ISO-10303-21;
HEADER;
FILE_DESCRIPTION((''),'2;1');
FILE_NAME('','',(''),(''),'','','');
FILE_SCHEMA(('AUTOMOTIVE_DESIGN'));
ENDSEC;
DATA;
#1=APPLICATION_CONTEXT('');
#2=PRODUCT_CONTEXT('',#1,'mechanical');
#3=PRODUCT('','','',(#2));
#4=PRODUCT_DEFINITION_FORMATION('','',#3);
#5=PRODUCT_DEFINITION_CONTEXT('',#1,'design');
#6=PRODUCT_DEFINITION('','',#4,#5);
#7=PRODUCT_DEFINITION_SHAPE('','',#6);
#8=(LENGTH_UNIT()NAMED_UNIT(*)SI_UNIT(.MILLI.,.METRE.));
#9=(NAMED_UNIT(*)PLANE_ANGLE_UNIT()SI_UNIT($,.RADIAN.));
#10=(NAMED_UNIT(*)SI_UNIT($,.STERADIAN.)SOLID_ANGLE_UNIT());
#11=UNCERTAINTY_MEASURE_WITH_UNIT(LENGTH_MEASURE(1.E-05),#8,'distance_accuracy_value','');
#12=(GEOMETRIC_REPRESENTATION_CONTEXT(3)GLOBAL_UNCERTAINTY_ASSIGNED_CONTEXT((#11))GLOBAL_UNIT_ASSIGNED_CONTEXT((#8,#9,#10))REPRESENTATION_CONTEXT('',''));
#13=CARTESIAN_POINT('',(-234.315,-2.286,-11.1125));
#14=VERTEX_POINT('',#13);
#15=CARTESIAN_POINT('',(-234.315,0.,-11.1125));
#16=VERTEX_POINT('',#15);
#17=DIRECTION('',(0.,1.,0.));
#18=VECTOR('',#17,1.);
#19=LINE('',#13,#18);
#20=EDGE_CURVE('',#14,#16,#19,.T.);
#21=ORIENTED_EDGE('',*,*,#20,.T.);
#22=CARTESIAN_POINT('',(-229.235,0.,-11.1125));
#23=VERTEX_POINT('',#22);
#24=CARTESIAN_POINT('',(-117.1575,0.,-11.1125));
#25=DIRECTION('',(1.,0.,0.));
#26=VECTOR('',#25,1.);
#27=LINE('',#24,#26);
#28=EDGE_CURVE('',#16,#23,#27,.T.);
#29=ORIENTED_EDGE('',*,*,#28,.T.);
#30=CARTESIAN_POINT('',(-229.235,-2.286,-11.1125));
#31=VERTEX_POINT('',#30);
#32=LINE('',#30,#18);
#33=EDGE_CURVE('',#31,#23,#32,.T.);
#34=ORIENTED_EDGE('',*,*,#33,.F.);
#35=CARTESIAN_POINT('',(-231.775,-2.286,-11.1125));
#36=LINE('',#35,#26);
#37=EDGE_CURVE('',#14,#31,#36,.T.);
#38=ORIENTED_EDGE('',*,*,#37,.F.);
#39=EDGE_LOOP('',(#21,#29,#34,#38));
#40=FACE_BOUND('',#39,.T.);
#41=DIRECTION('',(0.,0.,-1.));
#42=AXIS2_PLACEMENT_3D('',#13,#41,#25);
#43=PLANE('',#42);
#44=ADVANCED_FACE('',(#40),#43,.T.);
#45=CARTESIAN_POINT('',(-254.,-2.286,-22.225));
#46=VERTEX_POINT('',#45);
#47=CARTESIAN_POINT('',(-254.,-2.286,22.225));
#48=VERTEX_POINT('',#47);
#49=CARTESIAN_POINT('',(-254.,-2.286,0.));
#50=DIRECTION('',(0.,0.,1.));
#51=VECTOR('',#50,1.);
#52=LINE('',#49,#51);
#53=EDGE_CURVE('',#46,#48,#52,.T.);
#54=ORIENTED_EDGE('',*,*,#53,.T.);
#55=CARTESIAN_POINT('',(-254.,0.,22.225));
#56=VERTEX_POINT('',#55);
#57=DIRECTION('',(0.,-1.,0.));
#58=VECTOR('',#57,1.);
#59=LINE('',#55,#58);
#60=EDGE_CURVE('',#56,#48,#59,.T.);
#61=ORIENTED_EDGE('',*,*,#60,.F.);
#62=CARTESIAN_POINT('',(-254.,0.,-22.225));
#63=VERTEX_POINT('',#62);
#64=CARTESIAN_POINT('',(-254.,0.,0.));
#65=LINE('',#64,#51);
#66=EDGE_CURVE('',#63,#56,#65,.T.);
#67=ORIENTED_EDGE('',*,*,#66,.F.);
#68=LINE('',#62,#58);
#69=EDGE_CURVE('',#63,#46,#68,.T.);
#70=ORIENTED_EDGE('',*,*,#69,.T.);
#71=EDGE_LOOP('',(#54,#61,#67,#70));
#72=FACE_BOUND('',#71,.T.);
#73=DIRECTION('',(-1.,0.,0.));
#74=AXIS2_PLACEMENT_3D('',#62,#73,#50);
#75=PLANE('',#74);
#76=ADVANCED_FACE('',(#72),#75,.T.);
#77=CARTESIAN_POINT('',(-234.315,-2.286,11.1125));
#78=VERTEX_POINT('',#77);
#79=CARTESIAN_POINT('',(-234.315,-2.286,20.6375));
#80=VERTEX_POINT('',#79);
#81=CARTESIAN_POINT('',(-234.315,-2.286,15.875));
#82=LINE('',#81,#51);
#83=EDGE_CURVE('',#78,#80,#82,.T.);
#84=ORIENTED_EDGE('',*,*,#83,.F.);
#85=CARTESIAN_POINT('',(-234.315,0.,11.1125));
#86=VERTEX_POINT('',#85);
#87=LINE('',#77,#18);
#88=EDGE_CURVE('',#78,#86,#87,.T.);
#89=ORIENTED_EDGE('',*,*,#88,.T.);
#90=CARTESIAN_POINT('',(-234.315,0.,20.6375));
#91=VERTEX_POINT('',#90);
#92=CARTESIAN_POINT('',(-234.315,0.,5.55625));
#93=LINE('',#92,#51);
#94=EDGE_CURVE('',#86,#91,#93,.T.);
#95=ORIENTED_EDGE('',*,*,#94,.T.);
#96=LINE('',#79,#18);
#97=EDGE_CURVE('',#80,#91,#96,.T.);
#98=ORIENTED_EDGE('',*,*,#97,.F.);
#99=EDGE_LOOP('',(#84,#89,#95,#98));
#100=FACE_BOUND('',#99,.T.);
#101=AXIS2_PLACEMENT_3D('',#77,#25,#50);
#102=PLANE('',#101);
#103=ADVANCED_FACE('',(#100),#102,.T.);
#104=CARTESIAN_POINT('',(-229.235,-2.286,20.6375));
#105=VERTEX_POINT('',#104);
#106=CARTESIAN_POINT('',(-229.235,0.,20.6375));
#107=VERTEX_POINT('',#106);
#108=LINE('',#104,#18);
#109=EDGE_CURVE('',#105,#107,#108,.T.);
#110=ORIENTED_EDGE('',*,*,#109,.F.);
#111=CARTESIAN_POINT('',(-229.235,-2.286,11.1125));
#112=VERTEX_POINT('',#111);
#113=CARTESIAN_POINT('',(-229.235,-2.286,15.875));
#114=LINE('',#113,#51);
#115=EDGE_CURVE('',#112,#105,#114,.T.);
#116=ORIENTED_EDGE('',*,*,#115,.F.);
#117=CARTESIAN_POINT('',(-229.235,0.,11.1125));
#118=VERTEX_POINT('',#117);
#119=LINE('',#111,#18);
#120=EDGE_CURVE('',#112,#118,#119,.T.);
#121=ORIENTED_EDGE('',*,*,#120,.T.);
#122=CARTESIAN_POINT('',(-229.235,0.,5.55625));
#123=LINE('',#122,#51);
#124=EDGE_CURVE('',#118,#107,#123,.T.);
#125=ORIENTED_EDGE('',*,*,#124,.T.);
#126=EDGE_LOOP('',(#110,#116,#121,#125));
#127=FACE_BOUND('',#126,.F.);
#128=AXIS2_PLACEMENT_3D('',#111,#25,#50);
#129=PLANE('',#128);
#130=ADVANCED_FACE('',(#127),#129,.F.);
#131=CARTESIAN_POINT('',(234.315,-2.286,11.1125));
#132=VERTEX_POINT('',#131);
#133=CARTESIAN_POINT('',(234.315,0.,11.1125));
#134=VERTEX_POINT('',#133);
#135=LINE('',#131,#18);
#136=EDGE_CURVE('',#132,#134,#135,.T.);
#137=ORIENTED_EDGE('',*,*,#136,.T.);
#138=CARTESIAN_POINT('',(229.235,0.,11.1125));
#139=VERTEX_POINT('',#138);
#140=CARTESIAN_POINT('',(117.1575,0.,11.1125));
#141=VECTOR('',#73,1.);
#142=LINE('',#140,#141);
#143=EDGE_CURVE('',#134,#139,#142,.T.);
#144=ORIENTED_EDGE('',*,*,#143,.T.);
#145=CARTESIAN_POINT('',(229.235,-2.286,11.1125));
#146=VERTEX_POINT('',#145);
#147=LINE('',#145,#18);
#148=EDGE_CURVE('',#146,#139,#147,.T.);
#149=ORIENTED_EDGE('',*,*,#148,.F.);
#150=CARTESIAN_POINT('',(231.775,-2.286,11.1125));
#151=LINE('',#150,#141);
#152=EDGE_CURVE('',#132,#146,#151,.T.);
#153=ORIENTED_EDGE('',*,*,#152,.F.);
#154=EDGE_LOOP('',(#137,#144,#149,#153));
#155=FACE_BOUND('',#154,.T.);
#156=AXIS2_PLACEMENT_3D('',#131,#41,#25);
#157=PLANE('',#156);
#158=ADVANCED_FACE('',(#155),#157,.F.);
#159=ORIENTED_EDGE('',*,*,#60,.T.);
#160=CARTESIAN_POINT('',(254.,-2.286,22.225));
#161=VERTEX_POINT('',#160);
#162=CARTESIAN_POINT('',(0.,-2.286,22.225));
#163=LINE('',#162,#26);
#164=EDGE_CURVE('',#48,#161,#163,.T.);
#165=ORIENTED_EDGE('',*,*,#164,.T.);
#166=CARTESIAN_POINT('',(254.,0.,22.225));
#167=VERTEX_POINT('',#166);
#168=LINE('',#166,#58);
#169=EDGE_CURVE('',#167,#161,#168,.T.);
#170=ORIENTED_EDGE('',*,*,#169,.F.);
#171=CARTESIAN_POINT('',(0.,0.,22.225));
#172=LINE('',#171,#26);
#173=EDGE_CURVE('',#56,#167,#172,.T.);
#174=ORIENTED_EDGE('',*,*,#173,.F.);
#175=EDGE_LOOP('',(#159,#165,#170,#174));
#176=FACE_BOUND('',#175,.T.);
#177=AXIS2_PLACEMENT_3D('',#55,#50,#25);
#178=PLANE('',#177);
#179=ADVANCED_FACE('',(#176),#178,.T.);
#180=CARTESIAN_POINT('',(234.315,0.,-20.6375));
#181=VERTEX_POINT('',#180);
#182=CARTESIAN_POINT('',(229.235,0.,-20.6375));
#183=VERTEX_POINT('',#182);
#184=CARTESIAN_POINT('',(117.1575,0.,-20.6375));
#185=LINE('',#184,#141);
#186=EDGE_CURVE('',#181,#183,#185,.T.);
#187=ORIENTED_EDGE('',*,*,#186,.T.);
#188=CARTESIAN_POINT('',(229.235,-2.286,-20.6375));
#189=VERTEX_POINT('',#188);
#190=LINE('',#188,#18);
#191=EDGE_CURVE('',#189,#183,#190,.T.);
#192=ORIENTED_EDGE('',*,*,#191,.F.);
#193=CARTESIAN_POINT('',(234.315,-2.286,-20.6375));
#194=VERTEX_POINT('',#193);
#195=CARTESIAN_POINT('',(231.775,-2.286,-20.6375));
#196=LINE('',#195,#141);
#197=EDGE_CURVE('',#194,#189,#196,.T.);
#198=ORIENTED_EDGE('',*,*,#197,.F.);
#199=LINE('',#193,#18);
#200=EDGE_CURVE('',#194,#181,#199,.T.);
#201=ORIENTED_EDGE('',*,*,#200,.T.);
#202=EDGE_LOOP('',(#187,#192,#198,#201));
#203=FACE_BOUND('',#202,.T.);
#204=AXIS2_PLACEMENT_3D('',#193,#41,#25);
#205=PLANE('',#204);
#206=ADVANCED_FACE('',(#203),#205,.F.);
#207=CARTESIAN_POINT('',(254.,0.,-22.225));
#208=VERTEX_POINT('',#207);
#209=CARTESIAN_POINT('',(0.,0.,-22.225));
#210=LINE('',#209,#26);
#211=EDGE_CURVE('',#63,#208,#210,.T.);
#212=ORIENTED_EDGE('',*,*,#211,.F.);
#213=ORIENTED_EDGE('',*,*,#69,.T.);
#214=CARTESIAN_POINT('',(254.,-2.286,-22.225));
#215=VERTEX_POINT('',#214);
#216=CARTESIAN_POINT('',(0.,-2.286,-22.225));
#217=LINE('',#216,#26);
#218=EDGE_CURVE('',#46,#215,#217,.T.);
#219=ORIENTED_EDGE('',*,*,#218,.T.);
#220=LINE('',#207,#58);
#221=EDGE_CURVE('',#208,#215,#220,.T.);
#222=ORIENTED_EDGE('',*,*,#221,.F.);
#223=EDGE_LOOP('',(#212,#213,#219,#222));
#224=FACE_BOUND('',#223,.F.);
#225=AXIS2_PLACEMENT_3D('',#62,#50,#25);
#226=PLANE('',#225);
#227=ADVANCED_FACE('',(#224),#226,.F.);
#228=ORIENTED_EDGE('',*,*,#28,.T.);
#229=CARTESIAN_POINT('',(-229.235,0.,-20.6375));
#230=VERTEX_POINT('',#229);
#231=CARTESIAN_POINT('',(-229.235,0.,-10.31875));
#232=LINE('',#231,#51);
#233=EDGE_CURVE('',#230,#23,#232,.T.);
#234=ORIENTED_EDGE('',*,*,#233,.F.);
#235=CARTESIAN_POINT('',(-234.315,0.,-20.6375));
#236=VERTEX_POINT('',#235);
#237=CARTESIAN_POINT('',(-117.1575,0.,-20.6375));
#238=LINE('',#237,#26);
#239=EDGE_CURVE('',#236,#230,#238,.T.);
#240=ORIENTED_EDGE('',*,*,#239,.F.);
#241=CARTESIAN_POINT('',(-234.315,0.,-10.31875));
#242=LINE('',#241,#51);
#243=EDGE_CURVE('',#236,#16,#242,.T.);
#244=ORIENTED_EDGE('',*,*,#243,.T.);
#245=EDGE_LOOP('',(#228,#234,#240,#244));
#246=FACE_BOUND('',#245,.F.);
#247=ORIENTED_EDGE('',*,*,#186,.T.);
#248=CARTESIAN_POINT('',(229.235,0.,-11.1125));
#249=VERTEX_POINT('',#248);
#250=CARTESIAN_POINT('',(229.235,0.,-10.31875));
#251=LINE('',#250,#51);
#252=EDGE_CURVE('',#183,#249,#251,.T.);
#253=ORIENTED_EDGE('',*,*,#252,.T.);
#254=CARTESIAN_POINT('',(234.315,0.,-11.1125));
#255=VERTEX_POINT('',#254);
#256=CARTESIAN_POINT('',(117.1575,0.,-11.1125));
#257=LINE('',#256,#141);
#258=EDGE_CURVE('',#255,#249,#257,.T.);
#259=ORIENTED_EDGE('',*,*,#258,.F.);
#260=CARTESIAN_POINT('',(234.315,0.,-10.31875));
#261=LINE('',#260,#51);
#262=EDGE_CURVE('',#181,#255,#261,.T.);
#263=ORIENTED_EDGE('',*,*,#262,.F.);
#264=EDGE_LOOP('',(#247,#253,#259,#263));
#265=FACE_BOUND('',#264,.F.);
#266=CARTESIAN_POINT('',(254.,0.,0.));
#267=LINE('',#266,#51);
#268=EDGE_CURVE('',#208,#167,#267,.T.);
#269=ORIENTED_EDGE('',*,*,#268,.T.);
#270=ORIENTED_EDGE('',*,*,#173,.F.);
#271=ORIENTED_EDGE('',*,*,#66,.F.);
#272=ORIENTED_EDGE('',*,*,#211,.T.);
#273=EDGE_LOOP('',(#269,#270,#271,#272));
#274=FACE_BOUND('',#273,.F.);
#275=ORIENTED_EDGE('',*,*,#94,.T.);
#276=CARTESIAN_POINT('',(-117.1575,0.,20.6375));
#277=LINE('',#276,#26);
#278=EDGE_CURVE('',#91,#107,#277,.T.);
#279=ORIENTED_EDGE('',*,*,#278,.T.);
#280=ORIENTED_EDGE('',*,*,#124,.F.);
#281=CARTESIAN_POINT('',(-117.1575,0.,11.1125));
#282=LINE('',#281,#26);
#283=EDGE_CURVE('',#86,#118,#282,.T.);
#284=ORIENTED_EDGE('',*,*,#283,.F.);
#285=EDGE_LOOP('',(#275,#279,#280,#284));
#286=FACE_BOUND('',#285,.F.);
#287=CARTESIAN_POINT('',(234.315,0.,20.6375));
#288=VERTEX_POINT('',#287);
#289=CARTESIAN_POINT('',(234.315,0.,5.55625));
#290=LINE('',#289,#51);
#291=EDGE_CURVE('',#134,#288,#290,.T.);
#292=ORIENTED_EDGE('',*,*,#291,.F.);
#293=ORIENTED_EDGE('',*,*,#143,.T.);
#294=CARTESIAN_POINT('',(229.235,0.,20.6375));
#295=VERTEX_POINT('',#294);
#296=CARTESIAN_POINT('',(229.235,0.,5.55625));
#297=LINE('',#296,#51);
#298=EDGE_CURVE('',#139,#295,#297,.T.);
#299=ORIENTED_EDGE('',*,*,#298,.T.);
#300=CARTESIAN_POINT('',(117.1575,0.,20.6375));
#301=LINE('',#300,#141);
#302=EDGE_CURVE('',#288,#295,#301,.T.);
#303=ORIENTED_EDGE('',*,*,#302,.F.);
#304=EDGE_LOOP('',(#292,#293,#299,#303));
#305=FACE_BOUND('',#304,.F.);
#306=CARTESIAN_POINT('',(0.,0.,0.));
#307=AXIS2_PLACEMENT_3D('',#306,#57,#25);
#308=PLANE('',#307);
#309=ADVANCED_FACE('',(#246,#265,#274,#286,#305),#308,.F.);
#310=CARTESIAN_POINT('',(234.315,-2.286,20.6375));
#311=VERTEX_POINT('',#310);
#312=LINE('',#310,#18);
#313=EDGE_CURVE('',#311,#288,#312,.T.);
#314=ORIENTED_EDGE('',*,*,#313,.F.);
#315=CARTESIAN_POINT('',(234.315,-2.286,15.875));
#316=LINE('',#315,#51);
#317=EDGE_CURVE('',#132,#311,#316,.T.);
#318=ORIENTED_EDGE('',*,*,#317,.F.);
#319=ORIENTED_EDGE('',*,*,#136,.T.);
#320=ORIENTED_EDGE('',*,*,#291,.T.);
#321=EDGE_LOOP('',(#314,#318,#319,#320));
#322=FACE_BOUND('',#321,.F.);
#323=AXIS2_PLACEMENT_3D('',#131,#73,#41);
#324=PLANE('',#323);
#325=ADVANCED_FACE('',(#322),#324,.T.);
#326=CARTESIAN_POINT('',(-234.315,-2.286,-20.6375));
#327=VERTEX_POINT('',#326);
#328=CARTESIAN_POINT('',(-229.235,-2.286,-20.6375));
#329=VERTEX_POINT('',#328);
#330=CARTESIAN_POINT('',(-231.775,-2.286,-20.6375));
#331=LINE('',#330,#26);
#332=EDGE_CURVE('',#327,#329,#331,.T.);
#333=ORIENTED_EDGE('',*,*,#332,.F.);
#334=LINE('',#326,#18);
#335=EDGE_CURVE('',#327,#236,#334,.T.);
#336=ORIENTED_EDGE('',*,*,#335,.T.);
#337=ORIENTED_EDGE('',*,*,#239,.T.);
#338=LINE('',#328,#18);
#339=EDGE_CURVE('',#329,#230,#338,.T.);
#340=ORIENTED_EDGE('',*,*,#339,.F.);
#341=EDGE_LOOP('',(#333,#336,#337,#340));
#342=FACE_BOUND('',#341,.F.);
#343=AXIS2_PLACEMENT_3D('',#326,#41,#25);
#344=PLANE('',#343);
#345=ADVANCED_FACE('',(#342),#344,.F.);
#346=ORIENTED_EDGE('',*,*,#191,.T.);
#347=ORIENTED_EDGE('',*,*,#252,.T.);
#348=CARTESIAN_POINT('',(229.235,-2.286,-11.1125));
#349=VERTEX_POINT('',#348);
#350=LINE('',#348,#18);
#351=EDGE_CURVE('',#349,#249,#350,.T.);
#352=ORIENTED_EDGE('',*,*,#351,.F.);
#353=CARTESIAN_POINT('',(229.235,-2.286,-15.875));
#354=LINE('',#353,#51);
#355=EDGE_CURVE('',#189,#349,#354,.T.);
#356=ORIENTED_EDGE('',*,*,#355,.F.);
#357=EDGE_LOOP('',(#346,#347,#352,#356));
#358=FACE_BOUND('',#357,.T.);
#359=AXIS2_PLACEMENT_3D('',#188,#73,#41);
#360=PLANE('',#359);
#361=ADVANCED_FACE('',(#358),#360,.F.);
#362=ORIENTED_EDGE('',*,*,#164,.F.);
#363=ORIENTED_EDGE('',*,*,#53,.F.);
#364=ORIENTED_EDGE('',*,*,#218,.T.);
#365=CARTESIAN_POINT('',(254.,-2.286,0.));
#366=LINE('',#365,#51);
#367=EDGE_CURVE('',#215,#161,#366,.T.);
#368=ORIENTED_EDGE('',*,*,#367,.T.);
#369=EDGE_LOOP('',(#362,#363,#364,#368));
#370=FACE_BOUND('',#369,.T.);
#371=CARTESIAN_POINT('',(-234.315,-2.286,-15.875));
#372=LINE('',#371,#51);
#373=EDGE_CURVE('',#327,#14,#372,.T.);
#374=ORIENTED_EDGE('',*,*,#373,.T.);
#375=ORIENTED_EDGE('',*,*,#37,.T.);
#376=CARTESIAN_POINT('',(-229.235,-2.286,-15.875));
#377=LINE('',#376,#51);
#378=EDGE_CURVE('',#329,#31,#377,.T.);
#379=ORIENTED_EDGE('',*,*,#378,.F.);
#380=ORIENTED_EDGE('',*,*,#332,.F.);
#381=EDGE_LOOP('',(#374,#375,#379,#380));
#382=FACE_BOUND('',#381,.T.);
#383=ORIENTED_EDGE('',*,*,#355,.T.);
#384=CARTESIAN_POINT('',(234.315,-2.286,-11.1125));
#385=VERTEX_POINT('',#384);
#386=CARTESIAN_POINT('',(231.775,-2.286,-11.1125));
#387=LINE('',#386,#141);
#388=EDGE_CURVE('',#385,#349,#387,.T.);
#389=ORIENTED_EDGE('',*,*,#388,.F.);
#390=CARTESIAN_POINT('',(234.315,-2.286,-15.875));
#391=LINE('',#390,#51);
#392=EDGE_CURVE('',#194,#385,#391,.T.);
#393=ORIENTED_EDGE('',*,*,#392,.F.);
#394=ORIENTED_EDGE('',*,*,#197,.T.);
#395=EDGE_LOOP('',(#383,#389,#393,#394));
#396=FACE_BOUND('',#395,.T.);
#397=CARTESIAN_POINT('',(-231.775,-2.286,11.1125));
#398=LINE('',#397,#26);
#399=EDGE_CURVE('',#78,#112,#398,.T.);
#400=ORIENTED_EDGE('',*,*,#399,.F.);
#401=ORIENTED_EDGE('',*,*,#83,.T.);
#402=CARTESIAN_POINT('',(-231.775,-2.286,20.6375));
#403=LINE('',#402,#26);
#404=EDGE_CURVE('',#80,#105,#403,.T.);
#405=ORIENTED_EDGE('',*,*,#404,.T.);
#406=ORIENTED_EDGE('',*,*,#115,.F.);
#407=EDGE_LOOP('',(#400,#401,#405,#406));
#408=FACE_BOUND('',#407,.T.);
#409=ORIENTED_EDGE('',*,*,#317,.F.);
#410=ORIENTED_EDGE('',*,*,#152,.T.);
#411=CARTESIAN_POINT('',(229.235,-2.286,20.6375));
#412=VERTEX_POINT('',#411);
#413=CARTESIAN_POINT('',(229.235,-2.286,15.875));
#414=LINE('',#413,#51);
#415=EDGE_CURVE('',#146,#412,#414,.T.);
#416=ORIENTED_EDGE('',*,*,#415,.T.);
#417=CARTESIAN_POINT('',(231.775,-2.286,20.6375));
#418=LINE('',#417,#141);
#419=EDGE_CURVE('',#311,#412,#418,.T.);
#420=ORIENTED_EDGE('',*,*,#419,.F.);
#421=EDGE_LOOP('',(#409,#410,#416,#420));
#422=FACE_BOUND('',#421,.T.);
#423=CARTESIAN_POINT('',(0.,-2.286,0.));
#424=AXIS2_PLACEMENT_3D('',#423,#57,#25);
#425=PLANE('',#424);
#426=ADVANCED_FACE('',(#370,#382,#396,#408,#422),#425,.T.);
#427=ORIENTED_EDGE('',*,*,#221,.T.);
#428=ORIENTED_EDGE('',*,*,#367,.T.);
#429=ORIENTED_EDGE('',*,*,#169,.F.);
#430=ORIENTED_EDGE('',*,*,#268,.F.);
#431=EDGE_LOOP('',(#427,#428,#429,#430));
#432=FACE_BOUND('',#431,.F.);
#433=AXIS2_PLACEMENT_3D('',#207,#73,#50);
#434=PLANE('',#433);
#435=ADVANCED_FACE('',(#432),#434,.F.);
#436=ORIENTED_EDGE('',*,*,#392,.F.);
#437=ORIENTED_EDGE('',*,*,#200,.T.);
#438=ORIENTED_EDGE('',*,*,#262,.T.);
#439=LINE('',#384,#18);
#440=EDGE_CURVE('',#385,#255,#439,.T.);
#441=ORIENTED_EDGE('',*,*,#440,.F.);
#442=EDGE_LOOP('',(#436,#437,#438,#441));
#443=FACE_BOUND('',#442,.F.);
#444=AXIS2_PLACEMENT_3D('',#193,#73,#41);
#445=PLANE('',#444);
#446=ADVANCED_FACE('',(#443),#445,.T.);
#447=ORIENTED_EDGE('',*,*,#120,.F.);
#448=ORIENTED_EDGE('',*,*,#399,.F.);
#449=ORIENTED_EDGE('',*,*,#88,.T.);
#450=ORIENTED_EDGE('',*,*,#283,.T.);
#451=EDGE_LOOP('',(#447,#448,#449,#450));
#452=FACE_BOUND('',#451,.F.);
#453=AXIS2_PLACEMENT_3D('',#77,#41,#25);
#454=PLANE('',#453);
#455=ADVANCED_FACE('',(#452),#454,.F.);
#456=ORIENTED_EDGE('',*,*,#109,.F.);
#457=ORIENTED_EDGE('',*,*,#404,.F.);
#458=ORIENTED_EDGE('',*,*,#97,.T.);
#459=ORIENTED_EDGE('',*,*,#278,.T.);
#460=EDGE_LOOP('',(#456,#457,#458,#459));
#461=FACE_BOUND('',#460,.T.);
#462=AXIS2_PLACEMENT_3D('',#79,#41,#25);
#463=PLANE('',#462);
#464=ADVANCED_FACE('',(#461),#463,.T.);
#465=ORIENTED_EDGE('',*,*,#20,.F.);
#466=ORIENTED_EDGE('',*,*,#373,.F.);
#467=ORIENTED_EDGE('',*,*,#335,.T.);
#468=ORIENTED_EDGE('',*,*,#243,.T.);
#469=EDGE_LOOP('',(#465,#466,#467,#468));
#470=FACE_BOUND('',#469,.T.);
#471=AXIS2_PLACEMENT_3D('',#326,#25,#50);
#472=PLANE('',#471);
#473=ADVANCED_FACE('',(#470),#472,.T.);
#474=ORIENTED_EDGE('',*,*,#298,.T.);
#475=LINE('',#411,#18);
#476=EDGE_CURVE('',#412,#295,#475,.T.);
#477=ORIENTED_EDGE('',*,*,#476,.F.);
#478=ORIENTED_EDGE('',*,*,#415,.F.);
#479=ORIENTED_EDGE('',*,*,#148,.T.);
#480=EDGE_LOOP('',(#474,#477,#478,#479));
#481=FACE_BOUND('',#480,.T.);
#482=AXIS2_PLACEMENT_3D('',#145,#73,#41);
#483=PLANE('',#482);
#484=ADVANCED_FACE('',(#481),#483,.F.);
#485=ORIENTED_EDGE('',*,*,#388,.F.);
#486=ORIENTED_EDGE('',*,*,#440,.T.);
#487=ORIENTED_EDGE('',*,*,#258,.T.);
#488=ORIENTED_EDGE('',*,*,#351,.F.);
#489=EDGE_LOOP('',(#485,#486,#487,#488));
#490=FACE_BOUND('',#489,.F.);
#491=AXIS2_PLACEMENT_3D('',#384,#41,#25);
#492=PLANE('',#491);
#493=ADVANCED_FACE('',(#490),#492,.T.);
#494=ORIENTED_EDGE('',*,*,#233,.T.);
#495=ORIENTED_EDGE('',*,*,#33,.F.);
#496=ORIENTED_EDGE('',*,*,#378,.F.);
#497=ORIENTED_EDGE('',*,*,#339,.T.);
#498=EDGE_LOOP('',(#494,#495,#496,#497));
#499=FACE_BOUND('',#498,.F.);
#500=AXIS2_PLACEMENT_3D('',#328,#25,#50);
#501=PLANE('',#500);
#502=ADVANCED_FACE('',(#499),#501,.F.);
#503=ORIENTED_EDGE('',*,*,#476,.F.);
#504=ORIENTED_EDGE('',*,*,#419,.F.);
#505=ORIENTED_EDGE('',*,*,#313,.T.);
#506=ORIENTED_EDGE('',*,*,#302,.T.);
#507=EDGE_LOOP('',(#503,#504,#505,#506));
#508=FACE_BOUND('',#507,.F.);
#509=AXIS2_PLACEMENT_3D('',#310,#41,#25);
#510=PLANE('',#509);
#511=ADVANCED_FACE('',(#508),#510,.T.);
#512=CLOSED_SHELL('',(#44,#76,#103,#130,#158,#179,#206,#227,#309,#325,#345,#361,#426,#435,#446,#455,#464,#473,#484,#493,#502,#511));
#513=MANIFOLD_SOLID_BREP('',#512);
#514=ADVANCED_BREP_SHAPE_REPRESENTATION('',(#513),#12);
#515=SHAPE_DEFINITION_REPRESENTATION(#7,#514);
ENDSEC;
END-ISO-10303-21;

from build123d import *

# Parameters (mm, degrees)
F0_W     = 508
F0_H     = 44.45
F1_DEPTH = 2.286
F2_W     = 5.08
F2_H     = 9.525
F3_DEPTH = 2.287


# Not quite as in the source:
# - a pattern or mirror of a feature is missing from the dataset's text; its kind, count and spacing are read off the source's solid


with BuildPart() as f1:
    # F0 (on Front) → F1 (new body)
    with BuildSketch(Plane.XZ):
        Rectangle(F0_W, F0_H)
    extrude(amount=F1_DEPTH)

    # F2 (on face) → F3 (cut, through all)
    with BuildSketch(Plane.XZ.offset(2.286)):
        with Locations((-231.775, 15.875)):
            Rectangle(F2_W, F2_H)
        with Locations((-231.775, -15.875)):
            Rectangle(F2_W, F2_H)
    f3 = extrude(amount=-F3_DEPTH, mode=Mode.SUBTRACT)

    # F3_copies: F3 across plane
    add(f3.mirror(Plane(origin=(0, 0, 0), x_dir=(0, 0, 1), z_dir=(1, 0, 0))), mode=Mode.SUBTRACT)


solid = f1.part
